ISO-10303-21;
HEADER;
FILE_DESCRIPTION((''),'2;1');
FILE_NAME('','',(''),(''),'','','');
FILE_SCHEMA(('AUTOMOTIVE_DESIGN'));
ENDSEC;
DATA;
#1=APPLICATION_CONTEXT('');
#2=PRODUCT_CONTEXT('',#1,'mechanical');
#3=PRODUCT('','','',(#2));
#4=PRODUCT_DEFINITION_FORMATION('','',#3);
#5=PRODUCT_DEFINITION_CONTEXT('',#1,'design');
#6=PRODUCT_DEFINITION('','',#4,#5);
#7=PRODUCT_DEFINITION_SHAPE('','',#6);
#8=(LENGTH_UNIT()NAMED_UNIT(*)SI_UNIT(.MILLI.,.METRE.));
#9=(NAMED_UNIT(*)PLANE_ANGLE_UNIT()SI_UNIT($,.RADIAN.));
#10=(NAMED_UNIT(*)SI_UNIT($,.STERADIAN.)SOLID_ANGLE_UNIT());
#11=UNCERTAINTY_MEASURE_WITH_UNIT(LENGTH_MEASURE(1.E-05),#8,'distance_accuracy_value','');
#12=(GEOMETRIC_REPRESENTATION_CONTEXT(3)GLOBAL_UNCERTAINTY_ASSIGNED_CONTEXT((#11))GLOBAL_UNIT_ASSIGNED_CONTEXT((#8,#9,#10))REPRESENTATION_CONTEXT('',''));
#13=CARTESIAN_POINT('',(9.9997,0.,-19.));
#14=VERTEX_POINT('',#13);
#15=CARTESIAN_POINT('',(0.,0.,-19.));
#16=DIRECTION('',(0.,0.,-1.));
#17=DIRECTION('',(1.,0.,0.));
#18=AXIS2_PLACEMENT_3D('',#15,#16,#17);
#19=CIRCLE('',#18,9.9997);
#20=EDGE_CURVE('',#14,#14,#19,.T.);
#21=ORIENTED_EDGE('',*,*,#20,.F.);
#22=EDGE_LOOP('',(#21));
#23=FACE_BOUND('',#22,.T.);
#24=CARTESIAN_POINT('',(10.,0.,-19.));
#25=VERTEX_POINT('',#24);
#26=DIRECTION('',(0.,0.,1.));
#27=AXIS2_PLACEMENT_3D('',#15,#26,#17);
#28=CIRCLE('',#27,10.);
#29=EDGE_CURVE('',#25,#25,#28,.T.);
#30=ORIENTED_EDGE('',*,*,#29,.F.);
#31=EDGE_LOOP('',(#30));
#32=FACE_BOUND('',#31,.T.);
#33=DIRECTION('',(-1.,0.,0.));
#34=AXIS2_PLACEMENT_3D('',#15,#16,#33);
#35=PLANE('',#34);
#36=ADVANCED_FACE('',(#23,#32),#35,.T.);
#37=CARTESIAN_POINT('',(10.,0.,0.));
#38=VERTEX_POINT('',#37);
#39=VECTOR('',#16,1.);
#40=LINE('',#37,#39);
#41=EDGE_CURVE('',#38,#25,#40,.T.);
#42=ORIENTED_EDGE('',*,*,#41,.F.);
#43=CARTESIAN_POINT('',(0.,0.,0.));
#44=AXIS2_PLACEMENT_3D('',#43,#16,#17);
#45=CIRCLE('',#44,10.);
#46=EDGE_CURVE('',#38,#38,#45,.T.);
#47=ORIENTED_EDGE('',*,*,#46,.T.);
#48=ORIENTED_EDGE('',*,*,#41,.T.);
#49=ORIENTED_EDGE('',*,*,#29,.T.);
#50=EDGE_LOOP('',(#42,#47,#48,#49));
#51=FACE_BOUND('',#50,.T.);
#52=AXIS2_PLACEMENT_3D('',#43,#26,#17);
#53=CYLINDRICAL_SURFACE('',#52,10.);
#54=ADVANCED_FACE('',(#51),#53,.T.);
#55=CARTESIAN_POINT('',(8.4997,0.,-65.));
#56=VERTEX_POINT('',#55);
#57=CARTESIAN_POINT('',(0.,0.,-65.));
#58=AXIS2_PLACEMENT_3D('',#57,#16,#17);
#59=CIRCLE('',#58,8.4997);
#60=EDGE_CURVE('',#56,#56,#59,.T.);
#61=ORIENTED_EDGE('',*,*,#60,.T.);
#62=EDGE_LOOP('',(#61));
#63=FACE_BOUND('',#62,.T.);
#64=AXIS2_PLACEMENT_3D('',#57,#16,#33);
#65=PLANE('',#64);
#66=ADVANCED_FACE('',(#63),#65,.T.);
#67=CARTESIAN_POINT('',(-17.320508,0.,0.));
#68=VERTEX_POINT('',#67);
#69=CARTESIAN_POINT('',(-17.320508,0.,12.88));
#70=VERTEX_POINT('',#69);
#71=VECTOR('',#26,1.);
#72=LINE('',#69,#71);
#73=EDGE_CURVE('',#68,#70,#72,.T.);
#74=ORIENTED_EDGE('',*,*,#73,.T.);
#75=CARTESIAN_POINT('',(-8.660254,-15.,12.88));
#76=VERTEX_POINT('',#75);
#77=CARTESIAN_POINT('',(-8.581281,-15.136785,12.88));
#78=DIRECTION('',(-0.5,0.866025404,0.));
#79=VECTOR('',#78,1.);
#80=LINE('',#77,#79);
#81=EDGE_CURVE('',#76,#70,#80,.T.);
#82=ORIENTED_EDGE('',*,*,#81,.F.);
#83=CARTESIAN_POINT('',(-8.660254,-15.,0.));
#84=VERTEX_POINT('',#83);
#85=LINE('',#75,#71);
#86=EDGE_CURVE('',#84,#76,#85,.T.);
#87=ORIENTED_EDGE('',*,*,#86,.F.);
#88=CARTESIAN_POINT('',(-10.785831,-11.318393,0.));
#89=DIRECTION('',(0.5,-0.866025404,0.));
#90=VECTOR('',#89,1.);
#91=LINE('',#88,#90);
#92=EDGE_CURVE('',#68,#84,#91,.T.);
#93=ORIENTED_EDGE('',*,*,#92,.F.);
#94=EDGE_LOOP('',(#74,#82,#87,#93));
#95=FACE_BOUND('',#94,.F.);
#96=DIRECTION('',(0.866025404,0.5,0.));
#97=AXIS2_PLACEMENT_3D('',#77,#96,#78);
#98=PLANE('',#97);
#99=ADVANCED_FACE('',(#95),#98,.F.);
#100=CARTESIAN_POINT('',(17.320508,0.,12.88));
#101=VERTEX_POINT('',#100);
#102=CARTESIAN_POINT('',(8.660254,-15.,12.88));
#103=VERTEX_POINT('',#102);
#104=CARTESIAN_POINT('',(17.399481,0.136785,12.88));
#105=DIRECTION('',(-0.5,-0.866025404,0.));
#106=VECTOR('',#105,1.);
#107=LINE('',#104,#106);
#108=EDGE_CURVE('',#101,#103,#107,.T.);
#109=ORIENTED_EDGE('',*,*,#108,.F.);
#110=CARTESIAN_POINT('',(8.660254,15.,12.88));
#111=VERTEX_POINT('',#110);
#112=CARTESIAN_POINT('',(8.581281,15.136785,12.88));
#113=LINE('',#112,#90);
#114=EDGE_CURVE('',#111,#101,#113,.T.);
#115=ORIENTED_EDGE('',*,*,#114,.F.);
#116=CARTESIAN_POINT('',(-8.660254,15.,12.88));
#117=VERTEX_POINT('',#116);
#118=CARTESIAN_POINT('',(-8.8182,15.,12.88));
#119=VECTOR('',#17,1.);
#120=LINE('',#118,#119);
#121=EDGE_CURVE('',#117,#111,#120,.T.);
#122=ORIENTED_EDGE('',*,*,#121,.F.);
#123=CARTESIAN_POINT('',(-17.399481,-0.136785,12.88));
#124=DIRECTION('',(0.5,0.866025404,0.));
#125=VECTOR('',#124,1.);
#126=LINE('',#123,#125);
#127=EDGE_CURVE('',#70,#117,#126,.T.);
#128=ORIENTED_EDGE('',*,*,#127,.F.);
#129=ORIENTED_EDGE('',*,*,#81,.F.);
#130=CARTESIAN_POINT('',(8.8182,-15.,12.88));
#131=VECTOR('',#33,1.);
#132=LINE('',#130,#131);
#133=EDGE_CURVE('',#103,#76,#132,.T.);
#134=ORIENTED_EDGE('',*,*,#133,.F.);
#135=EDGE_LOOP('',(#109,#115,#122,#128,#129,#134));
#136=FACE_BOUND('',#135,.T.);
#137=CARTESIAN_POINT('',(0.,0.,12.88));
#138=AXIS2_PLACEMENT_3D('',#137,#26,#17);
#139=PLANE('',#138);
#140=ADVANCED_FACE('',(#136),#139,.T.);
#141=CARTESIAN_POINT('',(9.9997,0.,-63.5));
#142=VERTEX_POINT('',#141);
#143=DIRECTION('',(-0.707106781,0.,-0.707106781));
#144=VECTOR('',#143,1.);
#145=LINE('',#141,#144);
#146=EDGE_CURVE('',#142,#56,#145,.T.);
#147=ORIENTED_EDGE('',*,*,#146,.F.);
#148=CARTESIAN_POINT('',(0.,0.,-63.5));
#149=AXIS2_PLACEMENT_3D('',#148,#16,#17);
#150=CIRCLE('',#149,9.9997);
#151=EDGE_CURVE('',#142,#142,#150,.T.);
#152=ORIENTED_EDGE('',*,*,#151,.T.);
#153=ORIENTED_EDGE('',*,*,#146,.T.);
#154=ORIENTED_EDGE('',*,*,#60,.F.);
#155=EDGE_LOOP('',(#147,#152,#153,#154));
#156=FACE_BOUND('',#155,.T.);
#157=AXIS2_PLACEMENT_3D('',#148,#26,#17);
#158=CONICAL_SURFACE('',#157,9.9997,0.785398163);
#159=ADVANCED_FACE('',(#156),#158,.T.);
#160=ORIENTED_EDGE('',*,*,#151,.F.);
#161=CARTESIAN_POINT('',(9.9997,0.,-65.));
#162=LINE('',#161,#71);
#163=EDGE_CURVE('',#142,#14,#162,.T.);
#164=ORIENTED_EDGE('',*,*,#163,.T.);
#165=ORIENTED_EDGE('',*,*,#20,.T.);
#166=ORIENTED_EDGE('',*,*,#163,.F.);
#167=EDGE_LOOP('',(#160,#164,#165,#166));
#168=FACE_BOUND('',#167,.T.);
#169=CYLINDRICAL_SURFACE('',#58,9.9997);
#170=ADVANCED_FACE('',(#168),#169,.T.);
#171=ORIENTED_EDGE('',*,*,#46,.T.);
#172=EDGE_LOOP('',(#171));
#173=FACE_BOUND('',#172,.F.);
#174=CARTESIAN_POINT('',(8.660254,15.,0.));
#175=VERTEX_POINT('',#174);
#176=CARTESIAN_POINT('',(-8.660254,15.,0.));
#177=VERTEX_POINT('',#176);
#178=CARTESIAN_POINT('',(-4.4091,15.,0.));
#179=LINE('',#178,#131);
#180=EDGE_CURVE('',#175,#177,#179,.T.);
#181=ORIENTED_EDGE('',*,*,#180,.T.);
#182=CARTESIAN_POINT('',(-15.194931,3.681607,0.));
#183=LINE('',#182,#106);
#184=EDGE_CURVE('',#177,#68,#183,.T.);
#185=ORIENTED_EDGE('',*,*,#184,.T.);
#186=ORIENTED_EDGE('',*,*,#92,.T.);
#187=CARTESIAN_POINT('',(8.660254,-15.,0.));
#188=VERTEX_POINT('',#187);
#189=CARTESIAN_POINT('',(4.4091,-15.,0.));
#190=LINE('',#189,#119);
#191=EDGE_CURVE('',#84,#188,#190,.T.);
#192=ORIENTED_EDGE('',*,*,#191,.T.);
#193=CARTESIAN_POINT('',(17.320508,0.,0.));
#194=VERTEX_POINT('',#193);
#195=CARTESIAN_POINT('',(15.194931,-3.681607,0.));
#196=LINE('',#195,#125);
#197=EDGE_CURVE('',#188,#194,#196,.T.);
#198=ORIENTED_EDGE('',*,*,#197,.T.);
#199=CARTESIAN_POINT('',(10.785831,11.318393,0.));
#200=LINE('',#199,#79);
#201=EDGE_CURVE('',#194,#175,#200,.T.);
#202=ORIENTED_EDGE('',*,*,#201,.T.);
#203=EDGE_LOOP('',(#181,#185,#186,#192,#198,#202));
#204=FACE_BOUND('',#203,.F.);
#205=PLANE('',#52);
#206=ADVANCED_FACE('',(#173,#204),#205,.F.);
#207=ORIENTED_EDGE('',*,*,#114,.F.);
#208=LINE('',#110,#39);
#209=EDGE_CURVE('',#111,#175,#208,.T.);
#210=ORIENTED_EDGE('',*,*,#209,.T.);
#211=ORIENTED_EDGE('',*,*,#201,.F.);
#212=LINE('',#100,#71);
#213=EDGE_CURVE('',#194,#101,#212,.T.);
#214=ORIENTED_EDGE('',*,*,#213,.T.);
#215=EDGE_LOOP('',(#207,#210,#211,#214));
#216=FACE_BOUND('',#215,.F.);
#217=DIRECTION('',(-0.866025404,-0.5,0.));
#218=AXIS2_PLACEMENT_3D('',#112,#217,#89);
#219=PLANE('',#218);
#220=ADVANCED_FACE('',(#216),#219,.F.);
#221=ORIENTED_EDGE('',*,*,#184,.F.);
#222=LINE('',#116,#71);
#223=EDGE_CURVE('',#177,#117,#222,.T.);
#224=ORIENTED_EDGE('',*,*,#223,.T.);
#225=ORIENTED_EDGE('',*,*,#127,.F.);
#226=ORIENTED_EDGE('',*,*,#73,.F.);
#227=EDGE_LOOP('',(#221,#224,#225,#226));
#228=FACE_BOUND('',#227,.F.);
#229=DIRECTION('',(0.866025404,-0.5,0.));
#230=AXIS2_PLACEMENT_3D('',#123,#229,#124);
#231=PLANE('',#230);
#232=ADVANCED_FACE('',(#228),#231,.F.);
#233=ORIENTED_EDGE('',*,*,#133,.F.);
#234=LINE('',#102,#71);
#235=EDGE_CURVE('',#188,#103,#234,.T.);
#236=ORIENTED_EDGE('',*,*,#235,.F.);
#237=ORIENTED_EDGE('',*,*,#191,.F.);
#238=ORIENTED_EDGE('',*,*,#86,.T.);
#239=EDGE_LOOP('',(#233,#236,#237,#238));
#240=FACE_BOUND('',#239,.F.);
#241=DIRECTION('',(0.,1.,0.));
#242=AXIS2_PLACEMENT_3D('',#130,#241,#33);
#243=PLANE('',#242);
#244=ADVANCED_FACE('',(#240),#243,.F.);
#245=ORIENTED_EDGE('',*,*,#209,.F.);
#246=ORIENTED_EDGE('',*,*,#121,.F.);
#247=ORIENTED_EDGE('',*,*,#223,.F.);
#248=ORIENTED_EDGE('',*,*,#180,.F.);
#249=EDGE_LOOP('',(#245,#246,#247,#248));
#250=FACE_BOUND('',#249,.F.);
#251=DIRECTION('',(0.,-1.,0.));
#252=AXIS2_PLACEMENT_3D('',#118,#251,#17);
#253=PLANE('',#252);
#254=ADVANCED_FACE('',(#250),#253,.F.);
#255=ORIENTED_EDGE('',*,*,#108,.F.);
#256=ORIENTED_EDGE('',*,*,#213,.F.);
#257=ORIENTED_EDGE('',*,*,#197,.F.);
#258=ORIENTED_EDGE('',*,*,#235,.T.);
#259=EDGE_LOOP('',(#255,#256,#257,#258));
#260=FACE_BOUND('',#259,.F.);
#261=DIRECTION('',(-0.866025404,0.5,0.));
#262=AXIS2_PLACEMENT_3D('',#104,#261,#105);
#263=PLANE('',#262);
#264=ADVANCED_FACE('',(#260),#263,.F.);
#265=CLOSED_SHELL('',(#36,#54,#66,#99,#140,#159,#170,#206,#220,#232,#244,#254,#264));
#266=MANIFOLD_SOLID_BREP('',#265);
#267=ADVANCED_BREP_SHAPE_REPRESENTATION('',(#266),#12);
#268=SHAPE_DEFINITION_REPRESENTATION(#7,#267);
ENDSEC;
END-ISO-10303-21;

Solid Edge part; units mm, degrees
sketch "Sketch1" plane through (0, 0, 0) normal (0, 0, 1) x (1, 0, 0)
  circle A0 centre (0, 0) radius 17.4
  dimension "D1" = 34.8
extrude "Protrusion1" add sketch "Sketch1" along normal blind 12.88
sketch "Sketch2" plane through (0, 0, 0) normal (0, 0, -1) x (1, 0, 0)
  circle A0 centre (0, 0) radius 10
extrude "Protrusion2" add sketch "Sketch2" along normal blind 65
sketch "Sketch3" plane through (0, 0, -65) normal (0, 0, -1) x (1, 0, 0)
  circle A0 centre (0, 0) radius 9.9997
extrude "Cutout1" cut sketch "Sketch3" against normal blind 46 flip side to cut
chamfer "Chamfer_1" distance 1.5 angle 45 1 edges at (-9.9997, 0, -65)
sketch "Sketch4" plane through (0, 0, 12.88) normal (0, 0, 1) x (1, 0, 0)
  line L0 (-8.8182, 15) -> (8.8182, 15)
  dimension "D1" = 30
extrude "Cutout2" cut sketch "Sketch4" against normal up to next material side at (0, 15.05, 12.88)
pattern_circular "Pattern1" count 6 over 360 about axis through (0, 0, 12.88) along (0, 0, 1) of "Cutout2"
properties part number "24104523"
